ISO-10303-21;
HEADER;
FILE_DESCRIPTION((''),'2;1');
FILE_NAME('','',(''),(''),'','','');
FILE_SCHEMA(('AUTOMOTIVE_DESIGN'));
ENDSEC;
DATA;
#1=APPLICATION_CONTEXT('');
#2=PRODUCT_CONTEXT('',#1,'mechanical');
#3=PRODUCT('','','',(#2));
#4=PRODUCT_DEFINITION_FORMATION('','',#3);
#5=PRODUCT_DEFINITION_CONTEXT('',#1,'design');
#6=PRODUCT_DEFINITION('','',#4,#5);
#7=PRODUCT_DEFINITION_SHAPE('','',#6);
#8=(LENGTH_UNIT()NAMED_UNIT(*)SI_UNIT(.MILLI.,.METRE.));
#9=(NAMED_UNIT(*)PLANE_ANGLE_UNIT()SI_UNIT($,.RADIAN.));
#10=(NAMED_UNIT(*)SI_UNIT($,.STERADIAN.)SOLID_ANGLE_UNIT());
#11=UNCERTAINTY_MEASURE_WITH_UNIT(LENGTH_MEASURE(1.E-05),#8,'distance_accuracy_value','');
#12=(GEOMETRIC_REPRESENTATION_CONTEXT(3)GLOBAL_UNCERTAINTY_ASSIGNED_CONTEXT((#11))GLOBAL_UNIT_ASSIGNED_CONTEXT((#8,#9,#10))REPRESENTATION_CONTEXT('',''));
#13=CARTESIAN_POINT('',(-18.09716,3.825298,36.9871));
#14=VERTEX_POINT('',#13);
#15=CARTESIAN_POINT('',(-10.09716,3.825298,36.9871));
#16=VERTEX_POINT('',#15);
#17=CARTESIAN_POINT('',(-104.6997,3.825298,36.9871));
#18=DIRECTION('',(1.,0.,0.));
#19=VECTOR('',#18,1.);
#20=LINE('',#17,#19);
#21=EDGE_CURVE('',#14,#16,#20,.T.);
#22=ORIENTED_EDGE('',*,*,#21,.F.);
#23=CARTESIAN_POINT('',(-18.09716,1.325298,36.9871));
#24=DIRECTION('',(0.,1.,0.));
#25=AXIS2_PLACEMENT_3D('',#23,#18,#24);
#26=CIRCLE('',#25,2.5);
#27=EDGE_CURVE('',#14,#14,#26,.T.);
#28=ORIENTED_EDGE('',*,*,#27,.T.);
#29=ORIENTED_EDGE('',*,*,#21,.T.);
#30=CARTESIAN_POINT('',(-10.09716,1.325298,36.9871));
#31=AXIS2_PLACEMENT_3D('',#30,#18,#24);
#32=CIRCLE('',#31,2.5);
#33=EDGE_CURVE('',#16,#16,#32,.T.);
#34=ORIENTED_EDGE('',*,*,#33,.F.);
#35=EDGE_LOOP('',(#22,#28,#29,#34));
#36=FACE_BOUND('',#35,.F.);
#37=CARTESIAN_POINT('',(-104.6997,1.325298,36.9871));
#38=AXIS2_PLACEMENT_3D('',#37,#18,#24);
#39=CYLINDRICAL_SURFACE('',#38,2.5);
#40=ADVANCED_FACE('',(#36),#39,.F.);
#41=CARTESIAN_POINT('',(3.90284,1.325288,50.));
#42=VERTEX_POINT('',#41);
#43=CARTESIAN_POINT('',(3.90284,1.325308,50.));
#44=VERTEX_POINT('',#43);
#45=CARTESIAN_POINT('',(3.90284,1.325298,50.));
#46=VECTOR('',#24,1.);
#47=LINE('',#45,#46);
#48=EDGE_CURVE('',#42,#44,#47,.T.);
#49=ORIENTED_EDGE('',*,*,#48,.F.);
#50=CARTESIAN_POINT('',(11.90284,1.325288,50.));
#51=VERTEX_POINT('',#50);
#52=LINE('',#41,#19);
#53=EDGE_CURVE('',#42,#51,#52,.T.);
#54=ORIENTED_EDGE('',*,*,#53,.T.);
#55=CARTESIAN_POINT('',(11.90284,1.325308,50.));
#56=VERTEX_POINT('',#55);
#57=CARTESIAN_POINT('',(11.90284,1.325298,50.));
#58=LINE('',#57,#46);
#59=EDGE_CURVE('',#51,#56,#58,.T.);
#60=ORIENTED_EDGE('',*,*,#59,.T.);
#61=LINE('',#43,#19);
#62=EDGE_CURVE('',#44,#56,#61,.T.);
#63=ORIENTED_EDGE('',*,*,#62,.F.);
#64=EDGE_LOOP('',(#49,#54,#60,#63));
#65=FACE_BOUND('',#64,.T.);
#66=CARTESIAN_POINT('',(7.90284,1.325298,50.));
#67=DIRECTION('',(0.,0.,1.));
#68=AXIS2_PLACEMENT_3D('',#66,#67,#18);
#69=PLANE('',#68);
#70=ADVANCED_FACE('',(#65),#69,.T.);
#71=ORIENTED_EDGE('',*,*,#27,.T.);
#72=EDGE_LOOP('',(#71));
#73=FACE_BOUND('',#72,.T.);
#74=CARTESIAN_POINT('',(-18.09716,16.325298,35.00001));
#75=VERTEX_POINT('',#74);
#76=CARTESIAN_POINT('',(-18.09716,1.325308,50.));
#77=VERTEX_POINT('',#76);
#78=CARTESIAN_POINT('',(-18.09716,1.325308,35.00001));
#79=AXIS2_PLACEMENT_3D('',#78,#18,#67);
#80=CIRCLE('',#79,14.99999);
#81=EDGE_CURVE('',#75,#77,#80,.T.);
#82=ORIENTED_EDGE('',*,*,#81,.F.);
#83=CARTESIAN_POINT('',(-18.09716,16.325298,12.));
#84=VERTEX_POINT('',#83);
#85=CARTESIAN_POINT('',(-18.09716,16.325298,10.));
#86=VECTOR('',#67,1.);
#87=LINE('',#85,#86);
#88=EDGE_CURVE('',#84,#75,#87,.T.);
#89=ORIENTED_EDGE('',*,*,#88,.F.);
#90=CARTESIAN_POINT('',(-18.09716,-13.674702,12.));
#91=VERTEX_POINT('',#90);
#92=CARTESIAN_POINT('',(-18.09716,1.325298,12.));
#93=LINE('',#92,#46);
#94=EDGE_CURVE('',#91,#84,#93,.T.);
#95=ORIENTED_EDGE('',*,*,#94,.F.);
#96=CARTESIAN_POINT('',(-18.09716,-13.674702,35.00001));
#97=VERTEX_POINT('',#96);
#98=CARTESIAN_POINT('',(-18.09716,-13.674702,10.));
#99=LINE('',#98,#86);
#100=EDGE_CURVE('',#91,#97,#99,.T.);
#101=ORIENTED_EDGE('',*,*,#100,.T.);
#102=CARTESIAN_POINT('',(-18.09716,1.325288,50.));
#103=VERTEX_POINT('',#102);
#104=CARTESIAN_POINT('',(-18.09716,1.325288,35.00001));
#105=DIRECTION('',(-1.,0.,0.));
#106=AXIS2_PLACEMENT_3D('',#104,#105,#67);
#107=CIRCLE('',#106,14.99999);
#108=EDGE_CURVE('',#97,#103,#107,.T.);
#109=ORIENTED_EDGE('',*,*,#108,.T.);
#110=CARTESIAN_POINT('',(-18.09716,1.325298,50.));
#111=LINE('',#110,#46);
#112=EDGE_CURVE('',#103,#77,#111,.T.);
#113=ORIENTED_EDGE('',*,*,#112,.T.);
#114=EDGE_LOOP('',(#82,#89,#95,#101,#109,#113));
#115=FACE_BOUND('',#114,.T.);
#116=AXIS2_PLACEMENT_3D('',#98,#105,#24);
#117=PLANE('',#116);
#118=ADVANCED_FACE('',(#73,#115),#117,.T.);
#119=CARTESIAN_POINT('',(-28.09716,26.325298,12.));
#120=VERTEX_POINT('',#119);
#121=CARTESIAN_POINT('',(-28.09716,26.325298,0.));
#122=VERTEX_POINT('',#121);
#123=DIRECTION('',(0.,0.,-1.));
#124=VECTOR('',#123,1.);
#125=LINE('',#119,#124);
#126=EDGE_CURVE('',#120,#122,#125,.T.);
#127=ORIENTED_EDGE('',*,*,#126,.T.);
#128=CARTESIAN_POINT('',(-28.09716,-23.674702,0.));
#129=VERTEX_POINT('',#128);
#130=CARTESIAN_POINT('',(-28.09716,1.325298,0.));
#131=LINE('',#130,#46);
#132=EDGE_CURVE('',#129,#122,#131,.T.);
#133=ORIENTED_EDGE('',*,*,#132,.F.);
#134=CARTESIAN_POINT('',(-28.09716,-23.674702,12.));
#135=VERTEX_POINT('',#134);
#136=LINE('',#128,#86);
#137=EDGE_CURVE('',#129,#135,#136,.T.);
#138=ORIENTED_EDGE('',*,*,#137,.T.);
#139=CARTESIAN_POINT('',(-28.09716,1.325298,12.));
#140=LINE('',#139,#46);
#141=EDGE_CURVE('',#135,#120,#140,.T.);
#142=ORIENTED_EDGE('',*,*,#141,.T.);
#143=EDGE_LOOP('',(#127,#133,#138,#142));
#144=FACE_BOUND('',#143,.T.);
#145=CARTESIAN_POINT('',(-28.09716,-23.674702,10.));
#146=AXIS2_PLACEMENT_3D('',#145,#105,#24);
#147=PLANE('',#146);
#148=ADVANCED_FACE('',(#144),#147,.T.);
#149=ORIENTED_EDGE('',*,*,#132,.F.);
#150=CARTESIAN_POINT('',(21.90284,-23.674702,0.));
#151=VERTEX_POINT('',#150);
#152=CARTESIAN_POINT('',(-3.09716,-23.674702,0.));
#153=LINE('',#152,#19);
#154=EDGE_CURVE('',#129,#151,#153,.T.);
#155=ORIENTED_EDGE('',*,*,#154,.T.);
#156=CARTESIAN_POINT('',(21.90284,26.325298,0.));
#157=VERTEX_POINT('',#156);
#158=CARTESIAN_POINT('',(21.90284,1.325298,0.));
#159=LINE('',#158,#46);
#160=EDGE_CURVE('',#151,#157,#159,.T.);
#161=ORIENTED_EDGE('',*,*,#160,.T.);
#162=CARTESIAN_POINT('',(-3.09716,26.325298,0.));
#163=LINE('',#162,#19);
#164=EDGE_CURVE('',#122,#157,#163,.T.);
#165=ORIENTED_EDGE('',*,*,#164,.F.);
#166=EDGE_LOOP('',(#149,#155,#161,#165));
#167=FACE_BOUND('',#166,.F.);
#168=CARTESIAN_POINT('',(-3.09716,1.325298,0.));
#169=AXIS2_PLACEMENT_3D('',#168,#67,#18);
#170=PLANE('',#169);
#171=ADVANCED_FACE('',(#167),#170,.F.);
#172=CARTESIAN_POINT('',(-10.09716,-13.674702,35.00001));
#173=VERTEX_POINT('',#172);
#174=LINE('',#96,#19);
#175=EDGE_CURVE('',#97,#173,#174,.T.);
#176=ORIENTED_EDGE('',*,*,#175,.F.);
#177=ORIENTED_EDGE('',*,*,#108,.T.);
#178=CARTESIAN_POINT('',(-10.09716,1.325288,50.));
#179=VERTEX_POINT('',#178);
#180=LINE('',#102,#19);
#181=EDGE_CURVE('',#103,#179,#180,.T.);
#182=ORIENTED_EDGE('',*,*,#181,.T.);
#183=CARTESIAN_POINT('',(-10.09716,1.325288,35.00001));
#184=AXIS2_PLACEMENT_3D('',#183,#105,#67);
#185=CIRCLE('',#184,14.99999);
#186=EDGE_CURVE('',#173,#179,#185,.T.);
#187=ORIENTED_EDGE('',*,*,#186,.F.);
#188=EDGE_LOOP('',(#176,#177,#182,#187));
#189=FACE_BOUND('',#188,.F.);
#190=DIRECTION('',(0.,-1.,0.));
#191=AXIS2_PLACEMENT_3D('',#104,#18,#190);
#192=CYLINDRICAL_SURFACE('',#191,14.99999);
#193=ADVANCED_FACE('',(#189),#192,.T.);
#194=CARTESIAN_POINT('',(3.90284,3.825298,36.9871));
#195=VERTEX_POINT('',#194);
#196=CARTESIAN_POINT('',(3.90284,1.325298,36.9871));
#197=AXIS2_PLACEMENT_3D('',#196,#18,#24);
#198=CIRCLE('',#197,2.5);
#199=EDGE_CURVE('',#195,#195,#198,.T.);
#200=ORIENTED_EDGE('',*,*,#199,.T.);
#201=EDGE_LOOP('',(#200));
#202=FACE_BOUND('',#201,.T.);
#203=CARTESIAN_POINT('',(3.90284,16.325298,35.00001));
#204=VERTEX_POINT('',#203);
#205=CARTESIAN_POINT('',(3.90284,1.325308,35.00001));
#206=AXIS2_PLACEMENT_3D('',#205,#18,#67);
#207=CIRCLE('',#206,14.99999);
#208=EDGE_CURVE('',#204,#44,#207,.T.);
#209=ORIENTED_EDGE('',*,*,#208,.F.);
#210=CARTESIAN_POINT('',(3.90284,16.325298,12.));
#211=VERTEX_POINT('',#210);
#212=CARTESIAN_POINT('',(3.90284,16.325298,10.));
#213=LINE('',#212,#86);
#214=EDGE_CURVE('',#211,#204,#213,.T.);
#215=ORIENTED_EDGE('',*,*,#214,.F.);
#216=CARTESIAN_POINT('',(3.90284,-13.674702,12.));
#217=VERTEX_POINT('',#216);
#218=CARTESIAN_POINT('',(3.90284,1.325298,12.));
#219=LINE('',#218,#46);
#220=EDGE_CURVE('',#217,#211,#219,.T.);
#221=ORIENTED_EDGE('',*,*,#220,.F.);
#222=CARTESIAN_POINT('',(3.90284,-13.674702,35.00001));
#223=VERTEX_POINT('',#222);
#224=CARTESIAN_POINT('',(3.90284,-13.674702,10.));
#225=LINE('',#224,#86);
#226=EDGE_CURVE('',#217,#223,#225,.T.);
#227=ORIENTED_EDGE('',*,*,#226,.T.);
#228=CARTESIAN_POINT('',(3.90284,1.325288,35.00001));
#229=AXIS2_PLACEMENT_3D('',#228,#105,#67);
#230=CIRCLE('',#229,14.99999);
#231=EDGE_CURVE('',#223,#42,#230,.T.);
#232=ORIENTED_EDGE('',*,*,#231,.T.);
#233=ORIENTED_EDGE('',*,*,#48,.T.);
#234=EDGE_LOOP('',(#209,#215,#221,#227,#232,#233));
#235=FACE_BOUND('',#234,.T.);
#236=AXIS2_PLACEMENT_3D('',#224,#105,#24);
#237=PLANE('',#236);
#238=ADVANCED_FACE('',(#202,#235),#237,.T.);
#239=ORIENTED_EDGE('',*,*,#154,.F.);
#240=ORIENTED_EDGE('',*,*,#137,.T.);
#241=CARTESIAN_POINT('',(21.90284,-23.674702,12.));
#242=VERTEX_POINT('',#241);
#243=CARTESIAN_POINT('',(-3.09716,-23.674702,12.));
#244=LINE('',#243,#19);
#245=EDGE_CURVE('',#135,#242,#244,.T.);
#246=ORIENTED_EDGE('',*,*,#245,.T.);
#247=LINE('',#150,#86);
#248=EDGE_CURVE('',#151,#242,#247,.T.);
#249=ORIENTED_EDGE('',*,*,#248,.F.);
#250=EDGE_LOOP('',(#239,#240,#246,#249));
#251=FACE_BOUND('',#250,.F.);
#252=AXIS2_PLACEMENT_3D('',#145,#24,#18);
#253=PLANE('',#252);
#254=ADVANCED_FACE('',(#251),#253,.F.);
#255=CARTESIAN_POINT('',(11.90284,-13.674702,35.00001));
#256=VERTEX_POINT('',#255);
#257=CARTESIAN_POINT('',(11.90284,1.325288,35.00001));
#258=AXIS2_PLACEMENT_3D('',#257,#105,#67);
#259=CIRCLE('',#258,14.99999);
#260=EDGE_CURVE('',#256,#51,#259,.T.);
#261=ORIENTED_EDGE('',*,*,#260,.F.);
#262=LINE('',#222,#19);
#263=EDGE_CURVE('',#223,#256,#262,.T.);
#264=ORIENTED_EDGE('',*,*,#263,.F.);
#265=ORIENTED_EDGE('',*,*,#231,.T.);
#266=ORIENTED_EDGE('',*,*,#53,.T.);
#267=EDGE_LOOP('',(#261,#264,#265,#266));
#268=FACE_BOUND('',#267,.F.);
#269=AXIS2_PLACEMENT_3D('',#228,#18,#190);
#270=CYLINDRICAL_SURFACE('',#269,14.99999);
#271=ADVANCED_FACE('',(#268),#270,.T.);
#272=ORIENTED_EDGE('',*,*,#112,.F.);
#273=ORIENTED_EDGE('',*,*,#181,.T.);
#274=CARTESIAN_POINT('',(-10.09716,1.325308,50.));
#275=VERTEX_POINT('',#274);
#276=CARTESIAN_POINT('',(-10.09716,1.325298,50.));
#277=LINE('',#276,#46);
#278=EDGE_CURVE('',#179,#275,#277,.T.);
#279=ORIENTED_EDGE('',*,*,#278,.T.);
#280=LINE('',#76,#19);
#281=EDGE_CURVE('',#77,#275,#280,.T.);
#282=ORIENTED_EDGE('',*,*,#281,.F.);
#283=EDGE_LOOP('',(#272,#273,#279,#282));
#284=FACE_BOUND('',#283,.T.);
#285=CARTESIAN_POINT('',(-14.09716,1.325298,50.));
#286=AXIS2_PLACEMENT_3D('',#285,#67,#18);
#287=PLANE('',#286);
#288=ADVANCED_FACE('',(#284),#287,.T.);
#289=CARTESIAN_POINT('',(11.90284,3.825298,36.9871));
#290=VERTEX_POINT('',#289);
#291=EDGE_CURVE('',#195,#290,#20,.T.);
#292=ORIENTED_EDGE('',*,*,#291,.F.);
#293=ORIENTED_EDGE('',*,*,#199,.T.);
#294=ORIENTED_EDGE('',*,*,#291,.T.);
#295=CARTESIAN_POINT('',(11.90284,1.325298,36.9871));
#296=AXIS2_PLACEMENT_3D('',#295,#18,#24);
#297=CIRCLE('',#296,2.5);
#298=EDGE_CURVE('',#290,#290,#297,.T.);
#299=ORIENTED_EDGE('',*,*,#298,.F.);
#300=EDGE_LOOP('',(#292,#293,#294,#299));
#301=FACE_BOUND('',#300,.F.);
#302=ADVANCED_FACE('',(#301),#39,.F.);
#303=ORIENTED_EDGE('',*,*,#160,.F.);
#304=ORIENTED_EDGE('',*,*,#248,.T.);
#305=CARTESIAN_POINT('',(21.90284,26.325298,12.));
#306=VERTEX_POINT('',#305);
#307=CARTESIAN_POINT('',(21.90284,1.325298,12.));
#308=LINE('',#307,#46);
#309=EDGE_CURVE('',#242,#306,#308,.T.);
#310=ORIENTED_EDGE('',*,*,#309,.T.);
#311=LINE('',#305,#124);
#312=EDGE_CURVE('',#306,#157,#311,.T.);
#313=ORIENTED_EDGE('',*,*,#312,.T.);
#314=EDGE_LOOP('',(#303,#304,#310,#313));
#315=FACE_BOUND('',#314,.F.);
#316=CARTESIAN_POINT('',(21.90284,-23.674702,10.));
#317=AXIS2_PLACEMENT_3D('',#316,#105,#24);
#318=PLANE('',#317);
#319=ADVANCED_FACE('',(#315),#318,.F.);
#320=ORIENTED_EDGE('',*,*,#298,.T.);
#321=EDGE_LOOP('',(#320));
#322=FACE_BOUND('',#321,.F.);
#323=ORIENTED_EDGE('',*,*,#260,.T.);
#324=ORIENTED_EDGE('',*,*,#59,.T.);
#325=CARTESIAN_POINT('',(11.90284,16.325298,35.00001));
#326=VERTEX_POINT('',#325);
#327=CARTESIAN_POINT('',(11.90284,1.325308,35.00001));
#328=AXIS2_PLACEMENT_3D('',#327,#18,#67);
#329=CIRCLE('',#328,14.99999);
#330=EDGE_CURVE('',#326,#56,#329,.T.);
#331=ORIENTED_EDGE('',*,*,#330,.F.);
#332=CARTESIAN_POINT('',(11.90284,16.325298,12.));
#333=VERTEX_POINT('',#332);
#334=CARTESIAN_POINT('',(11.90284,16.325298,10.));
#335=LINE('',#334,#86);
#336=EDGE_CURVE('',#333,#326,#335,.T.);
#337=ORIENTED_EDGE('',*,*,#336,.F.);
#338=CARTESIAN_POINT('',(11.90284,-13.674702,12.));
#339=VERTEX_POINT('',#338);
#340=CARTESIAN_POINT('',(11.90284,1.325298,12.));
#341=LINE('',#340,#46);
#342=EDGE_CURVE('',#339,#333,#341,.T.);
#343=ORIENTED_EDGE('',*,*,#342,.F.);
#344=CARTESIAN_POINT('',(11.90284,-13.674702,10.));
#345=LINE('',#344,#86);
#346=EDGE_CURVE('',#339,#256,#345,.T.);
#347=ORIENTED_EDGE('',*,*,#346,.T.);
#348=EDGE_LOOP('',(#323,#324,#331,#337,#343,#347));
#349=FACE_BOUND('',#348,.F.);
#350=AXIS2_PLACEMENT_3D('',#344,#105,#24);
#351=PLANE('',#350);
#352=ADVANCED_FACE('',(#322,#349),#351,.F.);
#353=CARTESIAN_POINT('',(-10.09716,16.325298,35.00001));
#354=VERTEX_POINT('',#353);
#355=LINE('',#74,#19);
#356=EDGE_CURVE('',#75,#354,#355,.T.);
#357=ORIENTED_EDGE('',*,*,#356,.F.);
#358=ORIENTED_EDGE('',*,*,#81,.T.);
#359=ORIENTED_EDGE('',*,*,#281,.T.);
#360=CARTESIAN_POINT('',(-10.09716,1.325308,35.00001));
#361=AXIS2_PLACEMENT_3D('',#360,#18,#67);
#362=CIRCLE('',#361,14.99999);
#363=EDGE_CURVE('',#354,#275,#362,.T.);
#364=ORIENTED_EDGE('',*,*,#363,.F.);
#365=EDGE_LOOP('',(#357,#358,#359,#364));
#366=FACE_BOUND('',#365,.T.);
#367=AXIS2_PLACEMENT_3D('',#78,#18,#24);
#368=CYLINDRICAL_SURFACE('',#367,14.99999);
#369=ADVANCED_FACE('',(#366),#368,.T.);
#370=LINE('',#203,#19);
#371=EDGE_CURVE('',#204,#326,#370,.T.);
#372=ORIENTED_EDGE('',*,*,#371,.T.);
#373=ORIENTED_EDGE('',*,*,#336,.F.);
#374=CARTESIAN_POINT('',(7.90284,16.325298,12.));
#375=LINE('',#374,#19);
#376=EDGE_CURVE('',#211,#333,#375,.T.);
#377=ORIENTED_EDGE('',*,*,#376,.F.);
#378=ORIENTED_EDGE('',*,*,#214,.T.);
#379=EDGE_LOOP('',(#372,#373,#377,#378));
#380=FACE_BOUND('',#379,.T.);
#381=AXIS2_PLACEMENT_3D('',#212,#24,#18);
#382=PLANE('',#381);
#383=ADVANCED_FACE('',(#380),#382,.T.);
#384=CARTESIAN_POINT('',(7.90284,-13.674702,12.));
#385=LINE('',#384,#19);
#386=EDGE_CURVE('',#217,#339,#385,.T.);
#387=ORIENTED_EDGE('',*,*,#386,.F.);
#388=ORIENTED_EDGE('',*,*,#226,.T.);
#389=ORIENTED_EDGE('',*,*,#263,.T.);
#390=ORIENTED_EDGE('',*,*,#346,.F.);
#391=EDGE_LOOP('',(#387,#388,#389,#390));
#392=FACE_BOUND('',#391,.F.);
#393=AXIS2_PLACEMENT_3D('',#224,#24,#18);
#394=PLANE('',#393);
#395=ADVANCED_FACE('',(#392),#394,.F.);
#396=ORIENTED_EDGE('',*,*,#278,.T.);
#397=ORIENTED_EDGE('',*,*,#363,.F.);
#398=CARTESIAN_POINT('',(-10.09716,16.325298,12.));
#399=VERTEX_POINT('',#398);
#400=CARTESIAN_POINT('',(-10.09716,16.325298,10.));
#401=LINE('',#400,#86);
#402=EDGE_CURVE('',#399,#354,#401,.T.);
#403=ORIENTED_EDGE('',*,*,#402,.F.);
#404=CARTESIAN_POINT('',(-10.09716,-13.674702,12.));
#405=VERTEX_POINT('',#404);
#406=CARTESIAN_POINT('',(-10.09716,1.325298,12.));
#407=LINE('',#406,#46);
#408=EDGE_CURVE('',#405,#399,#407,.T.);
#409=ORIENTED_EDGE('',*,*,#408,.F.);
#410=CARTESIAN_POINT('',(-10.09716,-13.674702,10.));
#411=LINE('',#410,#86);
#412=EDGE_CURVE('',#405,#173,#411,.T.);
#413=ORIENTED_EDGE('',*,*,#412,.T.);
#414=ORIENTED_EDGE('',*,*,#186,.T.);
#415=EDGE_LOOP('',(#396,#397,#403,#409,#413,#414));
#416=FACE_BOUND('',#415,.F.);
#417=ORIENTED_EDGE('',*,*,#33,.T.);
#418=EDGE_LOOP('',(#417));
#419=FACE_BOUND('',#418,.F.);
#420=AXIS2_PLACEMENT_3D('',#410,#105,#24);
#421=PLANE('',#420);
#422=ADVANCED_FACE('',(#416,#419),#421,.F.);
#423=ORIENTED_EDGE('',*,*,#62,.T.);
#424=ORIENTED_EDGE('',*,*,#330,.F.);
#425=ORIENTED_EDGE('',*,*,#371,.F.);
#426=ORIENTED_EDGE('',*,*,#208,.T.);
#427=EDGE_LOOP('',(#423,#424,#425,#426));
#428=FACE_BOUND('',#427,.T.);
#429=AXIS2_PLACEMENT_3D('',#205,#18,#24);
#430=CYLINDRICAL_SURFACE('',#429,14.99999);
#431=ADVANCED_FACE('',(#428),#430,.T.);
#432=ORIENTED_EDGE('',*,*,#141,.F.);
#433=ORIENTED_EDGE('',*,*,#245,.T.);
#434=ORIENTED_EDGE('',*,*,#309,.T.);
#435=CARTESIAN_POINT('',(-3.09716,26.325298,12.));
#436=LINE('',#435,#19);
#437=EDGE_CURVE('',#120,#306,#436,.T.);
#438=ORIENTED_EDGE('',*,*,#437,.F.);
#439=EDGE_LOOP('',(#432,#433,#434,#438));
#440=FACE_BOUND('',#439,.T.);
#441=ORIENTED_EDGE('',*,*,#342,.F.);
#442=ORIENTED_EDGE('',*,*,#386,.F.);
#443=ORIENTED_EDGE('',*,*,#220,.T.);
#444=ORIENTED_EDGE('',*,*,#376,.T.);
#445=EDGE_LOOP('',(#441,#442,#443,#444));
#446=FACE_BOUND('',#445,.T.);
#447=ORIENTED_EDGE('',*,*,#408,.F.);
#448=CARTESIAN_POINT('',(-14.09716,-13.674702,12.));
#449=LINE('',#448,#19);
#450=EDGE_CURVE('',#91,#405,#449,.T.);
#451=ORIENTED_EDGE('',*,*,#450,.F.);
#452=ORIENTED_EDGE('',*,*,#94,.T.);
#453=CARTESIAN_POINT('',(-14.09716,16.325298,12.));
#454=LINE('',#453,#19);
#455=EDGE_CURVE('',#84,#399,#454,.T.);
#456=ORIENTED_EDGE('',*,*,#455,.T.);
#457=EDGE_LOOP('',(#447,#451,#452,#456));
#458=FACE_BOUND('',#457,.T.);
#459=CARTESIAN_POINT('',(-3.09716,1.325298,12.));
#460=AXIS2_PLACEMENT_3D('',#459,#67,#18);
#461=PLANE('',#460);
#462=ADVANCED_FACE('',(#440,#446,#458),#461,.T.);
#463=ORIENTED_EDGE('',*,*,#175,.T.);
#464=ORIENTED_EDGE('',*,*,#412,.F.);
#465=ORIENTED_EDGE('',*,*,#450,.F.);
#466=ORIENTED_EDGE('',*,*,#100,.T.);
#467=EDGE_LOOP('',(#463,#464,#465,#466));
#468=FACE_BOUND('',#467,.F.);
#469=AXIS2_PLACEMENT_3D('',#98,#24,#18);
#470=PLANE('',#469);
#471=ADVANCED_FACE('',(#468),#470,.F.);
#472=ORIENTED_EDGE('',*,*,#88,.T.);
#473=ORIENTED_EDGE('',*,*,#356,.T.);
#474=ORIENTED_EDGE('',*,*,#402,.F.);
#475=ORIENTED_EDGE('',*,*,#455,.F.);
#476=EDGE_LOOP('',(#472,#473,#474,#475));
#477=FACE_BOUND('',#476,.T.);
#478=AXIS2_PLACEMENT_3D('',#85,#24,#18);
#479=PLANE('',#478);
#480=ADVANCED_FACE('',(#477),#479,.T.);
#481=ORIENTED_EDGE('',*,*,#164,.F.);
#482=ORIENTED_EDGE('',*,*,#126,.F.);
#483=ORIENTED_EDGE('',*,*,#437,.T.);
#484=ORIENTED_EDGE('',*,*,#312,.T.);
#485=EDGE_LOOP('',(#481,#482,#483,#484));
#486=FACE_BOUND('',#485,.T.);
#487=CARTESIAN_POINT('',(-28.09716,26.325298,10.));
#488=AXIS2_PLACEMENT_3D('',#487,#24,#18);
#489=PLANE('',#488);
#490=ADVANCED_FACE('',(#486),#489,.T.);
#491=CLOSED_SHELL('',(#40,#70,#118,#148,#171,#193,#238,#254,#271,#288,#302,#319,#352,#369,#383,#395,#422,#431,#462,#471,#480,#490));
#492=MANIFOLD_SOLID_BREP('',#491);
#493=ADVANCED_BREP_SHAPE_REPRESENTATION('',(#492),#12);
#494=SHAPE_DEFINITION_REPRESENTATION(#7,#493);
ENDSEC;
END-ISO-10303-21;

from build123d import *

# Parameters (mm, degrees)
F0_W     = 50
F0_H     = 50
F1_DEPTH = 10
F2_W     = 8
F2_H     = 30
F4_DEPTH = 40
F3_W     = 8
F3_H     = 30
F5_DEPTH = 40
F6_R     = 14.99999
F8_D     = 5
F9_DEPTH = 2


# Not quite as in the source:
# - a fillet or chamfer is up to 0.001 mm smaller than in the source, because OpenCascade refuses the exact size


with BuildPart() as f1:
    # F0 (on Top) → F1 (new body)
    with BuildSketch(Plane.XY):
        with Locations((-3.097159788, 1.3252983437)):
            Rectangle(F0_W, F0_H)
    extrude(amount=F1_DEPTH)

    # F2 (on face) → F4 (join)
    with BuildSketch(Plane.XY.offset(10)):
        with Locations((-14.097159788, 1.3252983437)):
            Rectangle(F2_W, F2_H)
    extrude(amount=F4_DEPTH)

    # F3 (on face) → F5 (join)
    with BuildSketch(Plane.XY.offset(10)):
        with Locations((7.902840212, 1.3252983437)):
            Rectangle(F3_W, F3_H)
    extrude(amount=F5_DEPTH)

    # F6 (radius 15 in the source; OpenCascade refuses exactly that, so slightly less here)
    f6_edges = [f1.edges().sort_by_distance(p)[0] for p in [
        (7.90284, -13.674702, 50),
        (7.90284, 16.325298, 50),
        (-14.09716, -13.674702, 50),
        (-14.09716, 16.325298, 50),
    ]]
    fillet(f6_edges, radius=F6_R)

    # F8 (through all)
    with Locations(Plane(origin=(-18.097159788, 0, 0), x_dir=(0, -1, 0), z_dir=(-1, 0, 0))):
        with Locations((-1.3252983437, 36.9870997965)):
            Hole(F8_D / 2)

    # F9 (add): a face of the model
    f9_faces = [f1.faces().sort_by_distance(p)[0] for p in [
        (-3.097159788, 1.3252983437, 10),
    ]]
    extrude(f9_faces, amount=F9_DEPTH)


solid = f1.part
